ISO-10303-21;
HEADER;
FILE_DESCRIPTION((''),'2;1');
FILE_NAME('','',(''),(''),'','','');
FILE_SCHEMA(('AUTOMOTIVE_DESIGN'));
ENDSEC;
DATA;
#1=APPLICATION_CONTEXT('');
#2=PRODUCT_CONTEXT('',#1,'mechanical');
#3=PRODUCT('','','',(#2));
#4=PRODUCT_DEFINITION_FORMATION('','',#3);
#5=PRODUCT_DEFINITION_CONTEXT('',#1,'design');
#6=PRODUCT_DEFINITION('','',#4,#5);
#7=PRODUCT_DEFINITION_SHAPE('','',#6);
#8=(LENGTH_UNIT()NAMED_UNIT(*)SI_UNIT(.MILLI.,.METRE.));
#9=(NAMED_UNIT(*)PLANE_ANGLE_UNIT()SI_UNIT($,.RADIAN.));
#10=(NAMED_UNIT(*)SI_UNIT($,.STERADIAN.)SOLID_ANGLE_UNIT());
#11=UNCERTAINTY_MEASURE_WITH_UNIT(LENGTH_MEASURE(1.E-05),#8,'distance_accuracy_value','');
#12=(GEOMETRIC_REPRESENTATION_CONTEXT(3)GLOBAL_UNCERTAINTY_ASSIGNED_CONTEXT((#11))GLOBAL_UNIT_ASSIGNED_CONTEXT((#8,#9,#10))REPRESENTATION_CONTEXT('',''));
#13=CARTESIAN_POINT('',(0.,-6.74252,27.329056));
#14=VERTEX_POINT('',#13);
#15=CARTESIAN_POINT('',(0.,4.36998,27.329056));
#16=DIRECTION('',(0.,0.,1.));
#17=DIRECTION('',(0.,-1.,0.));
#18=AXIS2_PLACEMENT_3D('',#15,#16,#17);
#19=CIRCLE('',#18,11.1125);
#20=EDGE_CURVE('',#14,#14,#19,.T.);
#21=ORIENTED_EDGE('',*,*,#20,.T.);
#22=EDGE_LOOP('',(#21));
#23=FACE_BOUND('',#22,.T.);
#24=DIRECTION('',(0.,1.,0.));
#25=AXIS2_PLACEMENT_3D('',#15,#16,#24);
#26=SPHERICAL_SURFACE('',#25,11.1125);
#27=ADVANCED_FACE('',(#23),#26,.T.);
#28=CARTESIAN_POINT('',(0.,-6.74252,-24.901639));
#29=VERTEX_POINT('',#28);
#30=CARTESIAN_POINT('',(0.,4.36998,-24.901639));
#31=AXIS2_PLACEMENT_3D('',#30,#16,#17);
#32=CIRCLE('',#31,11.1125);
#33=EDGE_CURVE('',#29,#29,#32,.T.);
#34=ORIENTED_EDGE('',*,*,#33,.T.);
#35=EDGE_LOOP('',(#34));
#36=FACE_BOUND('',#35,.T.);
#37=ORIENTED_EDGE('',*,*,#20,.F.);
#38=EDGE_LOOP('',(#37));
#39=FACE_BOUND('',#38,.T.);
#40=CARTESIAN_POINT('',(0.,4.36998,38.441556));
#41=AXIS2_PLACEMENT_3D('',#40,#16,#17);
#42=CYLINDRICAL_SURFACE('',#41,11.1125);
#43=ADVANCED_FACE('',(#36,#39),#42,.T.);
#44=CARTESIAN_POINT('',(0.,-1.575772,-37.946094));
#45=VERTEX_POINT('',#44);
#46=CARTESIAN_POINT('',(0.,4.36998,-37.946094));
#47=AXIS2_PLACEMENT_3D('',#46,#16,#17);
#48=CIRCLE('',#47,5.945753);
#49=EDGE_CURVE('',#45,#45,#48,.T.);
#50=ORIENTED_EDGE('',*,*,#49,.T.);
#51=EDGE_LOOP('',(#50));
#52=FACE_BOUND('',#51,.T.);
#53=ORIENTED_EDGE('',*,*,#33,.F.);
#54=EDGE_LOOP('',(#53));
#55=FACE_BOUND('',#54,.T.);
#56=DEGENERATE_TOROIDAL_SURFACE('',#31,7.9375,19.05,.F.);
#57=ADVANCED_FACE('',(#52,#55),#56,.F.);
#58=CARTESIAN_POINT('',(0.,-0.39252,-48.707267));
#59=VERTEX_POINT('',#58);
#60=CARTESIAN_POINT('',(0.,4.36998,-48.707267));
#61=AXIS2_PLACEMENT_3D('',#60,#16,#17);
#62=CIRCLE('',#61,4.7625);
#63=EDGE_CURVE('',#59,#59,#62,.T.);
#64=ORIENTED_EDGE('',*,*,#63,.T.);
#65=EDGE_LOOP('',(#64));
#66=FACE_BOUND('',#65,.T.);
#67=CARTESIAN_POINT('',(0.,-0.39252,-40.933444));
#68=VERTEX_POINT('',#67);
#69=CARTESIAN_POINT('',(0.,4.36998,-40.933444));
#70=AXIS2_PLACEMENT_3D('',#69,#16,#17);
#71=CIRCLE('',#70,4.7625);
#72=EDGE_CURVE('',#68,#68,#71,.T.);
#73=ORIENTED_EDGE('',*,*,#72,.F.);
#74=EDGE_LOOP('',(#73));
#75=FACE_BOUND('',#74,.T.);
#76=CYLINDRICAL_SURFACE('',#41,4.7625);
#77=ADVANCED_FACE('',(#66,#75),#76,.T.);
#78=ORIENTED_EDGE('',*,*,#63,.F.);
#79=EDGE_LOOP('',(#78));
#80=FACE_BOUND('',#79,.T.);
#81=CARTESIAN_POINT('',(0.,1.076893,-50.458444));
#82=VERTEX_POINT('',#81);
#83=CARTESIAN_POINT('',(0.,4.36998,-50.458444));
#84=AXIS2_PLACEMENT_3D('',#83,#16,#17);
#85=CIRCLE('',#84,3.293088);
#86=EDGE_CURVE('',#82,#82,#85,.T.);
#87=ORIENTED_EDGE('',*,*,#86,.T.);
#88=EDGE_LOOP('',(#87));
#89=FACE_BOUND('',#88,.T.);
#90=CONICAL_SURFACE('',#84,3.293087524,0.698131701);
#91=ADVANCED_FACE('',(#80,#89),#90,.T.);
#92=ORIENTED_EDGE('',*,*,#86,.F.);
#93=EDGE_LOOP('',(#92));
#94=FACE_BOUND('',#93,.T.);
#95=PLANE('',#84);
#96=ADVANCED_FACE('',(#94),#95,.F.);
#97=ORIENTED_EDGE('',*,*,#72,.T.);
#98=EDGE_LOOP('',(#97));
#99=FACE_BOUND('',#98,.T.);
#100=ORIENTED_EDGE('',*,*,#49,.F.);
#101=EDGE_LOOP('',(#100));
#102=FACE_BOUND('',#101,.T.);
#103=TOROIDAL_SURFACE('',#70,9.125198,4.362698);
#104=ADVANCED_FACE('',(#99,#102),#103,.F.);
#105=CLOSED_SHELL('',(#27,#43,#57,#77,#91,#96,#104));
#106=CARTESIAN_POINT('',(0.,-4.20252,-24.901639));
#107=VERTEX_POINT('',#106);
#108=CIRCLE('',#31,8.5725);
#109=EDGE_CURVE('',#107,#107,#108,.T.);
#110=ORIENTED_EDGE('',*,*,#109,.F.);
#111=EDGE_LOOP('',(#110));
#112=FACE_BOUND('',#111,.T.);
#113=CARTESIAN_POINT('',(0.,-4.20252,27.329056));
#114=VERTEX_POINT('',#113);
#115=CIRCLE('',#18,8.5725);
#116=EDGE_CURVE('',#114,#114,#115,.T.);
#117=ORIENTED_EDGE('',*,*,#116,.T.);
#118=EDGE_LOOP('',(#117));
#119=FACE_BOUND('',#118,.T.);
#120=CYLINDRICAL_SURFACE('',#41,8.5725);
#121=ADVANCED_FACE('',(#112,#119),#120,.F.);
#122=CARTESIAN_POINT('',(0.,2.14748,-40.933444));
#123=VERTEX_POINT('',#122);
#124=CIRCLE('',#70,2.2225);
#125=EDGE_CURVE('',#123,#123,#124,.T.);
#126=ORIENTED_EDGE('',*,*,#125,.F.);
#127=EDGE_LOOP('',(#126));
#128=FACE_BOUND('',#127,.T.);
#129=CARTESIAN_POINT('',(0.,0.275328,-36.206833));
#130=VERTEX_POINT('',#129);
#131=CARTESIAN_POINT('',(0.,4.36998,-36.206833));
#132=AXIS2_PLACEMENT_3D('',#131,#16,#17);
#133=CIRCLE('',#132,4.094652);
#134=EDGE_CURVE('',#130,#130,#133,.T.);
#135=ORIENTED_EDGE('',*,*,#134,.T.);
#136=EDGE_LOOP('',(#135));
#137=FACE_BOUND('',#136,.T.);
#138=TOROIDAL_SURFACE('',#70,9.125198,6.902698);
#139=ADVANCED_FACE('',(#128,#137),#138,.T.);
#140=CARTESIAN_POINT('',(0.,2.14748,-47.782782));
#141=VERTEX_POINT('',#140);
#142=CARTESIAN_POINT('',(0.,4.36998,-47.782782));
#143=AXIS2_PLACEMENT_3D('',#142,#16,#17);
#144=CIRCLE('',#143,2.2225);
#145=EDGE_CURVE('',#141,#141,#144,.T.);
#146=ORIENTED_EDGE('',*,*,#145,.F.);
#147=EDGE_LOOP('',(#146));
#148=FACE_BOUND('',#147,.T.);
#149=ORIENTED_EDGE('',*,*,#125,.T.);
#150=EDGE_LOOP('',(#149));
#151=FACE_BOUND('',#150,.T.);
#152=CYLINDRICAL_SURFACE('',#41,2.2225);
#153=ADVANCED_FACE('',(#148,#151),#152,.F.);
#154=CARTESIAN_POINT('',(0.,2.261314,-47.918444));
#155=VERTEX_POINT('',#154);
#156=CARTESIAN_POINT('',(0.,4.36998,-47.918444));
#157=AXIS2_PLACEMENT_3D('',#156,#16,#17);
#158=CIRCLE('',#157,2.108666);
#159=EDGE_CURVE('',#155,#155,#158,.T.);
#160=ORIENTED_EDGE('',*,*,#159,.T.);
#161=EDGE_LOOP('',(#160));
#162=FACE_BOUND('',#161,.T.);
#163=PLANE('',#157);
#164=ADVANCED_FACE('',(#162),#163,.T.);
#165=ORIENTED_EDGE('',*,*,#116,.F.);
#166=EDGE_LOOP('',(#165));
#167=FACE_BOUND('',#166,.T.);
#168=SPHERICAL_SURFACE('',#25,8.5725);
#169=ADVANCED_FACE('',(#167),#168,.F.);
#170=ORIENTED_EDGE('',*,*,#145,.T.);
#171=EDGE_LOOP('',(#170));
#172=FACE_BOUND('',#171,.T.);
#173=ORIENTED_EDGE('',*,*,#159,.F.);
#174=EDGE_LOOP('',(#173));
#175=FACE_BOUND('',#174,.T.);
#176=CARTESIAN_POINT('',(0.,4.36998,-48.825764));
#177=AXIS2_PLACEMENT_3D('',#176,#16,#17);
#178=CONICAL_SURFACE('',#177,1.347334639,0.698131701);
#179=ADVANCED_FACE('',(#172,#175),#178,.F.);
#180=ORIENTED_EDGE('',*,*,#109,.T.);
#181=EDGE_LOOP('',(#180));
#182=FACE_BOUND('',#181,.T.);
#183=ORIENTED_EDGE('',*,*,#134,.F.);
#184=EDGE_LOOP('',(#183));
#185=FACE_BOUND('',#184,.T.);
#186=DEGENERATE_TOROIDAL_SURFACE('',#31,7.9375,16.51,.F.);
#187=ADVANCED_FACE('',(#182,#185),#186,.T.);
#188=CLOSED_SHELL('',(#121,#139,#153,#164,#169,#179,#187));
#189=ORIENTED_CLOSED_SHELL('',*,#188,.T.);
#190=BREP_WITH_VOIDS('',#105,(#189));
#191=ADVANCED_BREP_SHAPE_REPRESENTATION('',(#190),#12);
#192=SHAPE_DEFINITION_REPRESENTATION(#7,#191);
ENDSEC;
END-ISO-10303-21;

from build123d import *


# Read off the part's stored shape, not the designer's step: Shell1
with BuildPart() as part:
    # Sketch3 → Revolve3 (revolve)
    with BuildSketch(Plane(origin=(0, 0, 0), x_dir=(0, 0, -1), z_dir=(1, 0, 0)), mode=Mode.PRIVATE) as revolve3_sk:
        with BuildLine():
            Line((40.933444221, 9.132480421), (48.707266624, 9.132480421))
            Line((48.707266624, 9.132480421), (50.458444221, 7.663067945))
            Line((50.458444221, 7.663067945), (50.458444221, 4.369980421))
            Line((50.458444221, 4.369980421), (-38.441555779, 4.369980421))
            ThreePointArc((-38.441555779, 4.369980421), (-35.186779885, 12.227704527), (-27.329055779, 15.482480421))
            Line((-27.329055779, 15.482480421), (24.901639323, 15.482480421))
            ThreePointArc((24.901639323, 15.482480421), (31.916856339, 14.14375452), (37.946094067, 10.315732937))
            ThreePointArc((37.946094067, 10.315732937), (39.32686809, 9.439066101), (40.933444221, 9.132480421))
        make_face()
    revolve(revolve3_sk.sketch.rotate(Axis((0, 4.369980421, 38.441555779), (0, 0, -1)), 180), axis=Axis((0, 4.369980421, 38.441555779), (0, 0, -1)))

    # Shell1 outline → Shell1 (revolve, cut)
    with BuildSketch(Plane.XZ.offset(-4.369980421)):
        with BuildLine():
            ThreePointArc((4.09465218, -36.206833435), (7.412270886, -30.981494071), (8.5725, -24.901639323))
            Line((8.5725, -24.901639323), (8.5725, 27.329055776))
            ThreePointArc((8.5725, 27.329055776), (6.061672883, 33.39072866), (0, 35.901555779))
            Line((0, 35.901555779), (0, -47.918444221))
            Line((0, -47.918444221), (2.108666073, -47.918444221))
            Line((2.108666073, -47.918444221), (2.2225, -47.782782229))
            Line((2.2225, -47.782782229), (2.2225, -40.933444221))
            ThreePointArc((2.2225, -40.933444221), (2.707582467, -38.391505822), (4.09465218, -36.206833435))
        make_face()
    revolve(axis=Axis((0, 4.369980421, 0), (0, 0, 1)), mode=Mode.SUBTRACT)


solid = part.part
